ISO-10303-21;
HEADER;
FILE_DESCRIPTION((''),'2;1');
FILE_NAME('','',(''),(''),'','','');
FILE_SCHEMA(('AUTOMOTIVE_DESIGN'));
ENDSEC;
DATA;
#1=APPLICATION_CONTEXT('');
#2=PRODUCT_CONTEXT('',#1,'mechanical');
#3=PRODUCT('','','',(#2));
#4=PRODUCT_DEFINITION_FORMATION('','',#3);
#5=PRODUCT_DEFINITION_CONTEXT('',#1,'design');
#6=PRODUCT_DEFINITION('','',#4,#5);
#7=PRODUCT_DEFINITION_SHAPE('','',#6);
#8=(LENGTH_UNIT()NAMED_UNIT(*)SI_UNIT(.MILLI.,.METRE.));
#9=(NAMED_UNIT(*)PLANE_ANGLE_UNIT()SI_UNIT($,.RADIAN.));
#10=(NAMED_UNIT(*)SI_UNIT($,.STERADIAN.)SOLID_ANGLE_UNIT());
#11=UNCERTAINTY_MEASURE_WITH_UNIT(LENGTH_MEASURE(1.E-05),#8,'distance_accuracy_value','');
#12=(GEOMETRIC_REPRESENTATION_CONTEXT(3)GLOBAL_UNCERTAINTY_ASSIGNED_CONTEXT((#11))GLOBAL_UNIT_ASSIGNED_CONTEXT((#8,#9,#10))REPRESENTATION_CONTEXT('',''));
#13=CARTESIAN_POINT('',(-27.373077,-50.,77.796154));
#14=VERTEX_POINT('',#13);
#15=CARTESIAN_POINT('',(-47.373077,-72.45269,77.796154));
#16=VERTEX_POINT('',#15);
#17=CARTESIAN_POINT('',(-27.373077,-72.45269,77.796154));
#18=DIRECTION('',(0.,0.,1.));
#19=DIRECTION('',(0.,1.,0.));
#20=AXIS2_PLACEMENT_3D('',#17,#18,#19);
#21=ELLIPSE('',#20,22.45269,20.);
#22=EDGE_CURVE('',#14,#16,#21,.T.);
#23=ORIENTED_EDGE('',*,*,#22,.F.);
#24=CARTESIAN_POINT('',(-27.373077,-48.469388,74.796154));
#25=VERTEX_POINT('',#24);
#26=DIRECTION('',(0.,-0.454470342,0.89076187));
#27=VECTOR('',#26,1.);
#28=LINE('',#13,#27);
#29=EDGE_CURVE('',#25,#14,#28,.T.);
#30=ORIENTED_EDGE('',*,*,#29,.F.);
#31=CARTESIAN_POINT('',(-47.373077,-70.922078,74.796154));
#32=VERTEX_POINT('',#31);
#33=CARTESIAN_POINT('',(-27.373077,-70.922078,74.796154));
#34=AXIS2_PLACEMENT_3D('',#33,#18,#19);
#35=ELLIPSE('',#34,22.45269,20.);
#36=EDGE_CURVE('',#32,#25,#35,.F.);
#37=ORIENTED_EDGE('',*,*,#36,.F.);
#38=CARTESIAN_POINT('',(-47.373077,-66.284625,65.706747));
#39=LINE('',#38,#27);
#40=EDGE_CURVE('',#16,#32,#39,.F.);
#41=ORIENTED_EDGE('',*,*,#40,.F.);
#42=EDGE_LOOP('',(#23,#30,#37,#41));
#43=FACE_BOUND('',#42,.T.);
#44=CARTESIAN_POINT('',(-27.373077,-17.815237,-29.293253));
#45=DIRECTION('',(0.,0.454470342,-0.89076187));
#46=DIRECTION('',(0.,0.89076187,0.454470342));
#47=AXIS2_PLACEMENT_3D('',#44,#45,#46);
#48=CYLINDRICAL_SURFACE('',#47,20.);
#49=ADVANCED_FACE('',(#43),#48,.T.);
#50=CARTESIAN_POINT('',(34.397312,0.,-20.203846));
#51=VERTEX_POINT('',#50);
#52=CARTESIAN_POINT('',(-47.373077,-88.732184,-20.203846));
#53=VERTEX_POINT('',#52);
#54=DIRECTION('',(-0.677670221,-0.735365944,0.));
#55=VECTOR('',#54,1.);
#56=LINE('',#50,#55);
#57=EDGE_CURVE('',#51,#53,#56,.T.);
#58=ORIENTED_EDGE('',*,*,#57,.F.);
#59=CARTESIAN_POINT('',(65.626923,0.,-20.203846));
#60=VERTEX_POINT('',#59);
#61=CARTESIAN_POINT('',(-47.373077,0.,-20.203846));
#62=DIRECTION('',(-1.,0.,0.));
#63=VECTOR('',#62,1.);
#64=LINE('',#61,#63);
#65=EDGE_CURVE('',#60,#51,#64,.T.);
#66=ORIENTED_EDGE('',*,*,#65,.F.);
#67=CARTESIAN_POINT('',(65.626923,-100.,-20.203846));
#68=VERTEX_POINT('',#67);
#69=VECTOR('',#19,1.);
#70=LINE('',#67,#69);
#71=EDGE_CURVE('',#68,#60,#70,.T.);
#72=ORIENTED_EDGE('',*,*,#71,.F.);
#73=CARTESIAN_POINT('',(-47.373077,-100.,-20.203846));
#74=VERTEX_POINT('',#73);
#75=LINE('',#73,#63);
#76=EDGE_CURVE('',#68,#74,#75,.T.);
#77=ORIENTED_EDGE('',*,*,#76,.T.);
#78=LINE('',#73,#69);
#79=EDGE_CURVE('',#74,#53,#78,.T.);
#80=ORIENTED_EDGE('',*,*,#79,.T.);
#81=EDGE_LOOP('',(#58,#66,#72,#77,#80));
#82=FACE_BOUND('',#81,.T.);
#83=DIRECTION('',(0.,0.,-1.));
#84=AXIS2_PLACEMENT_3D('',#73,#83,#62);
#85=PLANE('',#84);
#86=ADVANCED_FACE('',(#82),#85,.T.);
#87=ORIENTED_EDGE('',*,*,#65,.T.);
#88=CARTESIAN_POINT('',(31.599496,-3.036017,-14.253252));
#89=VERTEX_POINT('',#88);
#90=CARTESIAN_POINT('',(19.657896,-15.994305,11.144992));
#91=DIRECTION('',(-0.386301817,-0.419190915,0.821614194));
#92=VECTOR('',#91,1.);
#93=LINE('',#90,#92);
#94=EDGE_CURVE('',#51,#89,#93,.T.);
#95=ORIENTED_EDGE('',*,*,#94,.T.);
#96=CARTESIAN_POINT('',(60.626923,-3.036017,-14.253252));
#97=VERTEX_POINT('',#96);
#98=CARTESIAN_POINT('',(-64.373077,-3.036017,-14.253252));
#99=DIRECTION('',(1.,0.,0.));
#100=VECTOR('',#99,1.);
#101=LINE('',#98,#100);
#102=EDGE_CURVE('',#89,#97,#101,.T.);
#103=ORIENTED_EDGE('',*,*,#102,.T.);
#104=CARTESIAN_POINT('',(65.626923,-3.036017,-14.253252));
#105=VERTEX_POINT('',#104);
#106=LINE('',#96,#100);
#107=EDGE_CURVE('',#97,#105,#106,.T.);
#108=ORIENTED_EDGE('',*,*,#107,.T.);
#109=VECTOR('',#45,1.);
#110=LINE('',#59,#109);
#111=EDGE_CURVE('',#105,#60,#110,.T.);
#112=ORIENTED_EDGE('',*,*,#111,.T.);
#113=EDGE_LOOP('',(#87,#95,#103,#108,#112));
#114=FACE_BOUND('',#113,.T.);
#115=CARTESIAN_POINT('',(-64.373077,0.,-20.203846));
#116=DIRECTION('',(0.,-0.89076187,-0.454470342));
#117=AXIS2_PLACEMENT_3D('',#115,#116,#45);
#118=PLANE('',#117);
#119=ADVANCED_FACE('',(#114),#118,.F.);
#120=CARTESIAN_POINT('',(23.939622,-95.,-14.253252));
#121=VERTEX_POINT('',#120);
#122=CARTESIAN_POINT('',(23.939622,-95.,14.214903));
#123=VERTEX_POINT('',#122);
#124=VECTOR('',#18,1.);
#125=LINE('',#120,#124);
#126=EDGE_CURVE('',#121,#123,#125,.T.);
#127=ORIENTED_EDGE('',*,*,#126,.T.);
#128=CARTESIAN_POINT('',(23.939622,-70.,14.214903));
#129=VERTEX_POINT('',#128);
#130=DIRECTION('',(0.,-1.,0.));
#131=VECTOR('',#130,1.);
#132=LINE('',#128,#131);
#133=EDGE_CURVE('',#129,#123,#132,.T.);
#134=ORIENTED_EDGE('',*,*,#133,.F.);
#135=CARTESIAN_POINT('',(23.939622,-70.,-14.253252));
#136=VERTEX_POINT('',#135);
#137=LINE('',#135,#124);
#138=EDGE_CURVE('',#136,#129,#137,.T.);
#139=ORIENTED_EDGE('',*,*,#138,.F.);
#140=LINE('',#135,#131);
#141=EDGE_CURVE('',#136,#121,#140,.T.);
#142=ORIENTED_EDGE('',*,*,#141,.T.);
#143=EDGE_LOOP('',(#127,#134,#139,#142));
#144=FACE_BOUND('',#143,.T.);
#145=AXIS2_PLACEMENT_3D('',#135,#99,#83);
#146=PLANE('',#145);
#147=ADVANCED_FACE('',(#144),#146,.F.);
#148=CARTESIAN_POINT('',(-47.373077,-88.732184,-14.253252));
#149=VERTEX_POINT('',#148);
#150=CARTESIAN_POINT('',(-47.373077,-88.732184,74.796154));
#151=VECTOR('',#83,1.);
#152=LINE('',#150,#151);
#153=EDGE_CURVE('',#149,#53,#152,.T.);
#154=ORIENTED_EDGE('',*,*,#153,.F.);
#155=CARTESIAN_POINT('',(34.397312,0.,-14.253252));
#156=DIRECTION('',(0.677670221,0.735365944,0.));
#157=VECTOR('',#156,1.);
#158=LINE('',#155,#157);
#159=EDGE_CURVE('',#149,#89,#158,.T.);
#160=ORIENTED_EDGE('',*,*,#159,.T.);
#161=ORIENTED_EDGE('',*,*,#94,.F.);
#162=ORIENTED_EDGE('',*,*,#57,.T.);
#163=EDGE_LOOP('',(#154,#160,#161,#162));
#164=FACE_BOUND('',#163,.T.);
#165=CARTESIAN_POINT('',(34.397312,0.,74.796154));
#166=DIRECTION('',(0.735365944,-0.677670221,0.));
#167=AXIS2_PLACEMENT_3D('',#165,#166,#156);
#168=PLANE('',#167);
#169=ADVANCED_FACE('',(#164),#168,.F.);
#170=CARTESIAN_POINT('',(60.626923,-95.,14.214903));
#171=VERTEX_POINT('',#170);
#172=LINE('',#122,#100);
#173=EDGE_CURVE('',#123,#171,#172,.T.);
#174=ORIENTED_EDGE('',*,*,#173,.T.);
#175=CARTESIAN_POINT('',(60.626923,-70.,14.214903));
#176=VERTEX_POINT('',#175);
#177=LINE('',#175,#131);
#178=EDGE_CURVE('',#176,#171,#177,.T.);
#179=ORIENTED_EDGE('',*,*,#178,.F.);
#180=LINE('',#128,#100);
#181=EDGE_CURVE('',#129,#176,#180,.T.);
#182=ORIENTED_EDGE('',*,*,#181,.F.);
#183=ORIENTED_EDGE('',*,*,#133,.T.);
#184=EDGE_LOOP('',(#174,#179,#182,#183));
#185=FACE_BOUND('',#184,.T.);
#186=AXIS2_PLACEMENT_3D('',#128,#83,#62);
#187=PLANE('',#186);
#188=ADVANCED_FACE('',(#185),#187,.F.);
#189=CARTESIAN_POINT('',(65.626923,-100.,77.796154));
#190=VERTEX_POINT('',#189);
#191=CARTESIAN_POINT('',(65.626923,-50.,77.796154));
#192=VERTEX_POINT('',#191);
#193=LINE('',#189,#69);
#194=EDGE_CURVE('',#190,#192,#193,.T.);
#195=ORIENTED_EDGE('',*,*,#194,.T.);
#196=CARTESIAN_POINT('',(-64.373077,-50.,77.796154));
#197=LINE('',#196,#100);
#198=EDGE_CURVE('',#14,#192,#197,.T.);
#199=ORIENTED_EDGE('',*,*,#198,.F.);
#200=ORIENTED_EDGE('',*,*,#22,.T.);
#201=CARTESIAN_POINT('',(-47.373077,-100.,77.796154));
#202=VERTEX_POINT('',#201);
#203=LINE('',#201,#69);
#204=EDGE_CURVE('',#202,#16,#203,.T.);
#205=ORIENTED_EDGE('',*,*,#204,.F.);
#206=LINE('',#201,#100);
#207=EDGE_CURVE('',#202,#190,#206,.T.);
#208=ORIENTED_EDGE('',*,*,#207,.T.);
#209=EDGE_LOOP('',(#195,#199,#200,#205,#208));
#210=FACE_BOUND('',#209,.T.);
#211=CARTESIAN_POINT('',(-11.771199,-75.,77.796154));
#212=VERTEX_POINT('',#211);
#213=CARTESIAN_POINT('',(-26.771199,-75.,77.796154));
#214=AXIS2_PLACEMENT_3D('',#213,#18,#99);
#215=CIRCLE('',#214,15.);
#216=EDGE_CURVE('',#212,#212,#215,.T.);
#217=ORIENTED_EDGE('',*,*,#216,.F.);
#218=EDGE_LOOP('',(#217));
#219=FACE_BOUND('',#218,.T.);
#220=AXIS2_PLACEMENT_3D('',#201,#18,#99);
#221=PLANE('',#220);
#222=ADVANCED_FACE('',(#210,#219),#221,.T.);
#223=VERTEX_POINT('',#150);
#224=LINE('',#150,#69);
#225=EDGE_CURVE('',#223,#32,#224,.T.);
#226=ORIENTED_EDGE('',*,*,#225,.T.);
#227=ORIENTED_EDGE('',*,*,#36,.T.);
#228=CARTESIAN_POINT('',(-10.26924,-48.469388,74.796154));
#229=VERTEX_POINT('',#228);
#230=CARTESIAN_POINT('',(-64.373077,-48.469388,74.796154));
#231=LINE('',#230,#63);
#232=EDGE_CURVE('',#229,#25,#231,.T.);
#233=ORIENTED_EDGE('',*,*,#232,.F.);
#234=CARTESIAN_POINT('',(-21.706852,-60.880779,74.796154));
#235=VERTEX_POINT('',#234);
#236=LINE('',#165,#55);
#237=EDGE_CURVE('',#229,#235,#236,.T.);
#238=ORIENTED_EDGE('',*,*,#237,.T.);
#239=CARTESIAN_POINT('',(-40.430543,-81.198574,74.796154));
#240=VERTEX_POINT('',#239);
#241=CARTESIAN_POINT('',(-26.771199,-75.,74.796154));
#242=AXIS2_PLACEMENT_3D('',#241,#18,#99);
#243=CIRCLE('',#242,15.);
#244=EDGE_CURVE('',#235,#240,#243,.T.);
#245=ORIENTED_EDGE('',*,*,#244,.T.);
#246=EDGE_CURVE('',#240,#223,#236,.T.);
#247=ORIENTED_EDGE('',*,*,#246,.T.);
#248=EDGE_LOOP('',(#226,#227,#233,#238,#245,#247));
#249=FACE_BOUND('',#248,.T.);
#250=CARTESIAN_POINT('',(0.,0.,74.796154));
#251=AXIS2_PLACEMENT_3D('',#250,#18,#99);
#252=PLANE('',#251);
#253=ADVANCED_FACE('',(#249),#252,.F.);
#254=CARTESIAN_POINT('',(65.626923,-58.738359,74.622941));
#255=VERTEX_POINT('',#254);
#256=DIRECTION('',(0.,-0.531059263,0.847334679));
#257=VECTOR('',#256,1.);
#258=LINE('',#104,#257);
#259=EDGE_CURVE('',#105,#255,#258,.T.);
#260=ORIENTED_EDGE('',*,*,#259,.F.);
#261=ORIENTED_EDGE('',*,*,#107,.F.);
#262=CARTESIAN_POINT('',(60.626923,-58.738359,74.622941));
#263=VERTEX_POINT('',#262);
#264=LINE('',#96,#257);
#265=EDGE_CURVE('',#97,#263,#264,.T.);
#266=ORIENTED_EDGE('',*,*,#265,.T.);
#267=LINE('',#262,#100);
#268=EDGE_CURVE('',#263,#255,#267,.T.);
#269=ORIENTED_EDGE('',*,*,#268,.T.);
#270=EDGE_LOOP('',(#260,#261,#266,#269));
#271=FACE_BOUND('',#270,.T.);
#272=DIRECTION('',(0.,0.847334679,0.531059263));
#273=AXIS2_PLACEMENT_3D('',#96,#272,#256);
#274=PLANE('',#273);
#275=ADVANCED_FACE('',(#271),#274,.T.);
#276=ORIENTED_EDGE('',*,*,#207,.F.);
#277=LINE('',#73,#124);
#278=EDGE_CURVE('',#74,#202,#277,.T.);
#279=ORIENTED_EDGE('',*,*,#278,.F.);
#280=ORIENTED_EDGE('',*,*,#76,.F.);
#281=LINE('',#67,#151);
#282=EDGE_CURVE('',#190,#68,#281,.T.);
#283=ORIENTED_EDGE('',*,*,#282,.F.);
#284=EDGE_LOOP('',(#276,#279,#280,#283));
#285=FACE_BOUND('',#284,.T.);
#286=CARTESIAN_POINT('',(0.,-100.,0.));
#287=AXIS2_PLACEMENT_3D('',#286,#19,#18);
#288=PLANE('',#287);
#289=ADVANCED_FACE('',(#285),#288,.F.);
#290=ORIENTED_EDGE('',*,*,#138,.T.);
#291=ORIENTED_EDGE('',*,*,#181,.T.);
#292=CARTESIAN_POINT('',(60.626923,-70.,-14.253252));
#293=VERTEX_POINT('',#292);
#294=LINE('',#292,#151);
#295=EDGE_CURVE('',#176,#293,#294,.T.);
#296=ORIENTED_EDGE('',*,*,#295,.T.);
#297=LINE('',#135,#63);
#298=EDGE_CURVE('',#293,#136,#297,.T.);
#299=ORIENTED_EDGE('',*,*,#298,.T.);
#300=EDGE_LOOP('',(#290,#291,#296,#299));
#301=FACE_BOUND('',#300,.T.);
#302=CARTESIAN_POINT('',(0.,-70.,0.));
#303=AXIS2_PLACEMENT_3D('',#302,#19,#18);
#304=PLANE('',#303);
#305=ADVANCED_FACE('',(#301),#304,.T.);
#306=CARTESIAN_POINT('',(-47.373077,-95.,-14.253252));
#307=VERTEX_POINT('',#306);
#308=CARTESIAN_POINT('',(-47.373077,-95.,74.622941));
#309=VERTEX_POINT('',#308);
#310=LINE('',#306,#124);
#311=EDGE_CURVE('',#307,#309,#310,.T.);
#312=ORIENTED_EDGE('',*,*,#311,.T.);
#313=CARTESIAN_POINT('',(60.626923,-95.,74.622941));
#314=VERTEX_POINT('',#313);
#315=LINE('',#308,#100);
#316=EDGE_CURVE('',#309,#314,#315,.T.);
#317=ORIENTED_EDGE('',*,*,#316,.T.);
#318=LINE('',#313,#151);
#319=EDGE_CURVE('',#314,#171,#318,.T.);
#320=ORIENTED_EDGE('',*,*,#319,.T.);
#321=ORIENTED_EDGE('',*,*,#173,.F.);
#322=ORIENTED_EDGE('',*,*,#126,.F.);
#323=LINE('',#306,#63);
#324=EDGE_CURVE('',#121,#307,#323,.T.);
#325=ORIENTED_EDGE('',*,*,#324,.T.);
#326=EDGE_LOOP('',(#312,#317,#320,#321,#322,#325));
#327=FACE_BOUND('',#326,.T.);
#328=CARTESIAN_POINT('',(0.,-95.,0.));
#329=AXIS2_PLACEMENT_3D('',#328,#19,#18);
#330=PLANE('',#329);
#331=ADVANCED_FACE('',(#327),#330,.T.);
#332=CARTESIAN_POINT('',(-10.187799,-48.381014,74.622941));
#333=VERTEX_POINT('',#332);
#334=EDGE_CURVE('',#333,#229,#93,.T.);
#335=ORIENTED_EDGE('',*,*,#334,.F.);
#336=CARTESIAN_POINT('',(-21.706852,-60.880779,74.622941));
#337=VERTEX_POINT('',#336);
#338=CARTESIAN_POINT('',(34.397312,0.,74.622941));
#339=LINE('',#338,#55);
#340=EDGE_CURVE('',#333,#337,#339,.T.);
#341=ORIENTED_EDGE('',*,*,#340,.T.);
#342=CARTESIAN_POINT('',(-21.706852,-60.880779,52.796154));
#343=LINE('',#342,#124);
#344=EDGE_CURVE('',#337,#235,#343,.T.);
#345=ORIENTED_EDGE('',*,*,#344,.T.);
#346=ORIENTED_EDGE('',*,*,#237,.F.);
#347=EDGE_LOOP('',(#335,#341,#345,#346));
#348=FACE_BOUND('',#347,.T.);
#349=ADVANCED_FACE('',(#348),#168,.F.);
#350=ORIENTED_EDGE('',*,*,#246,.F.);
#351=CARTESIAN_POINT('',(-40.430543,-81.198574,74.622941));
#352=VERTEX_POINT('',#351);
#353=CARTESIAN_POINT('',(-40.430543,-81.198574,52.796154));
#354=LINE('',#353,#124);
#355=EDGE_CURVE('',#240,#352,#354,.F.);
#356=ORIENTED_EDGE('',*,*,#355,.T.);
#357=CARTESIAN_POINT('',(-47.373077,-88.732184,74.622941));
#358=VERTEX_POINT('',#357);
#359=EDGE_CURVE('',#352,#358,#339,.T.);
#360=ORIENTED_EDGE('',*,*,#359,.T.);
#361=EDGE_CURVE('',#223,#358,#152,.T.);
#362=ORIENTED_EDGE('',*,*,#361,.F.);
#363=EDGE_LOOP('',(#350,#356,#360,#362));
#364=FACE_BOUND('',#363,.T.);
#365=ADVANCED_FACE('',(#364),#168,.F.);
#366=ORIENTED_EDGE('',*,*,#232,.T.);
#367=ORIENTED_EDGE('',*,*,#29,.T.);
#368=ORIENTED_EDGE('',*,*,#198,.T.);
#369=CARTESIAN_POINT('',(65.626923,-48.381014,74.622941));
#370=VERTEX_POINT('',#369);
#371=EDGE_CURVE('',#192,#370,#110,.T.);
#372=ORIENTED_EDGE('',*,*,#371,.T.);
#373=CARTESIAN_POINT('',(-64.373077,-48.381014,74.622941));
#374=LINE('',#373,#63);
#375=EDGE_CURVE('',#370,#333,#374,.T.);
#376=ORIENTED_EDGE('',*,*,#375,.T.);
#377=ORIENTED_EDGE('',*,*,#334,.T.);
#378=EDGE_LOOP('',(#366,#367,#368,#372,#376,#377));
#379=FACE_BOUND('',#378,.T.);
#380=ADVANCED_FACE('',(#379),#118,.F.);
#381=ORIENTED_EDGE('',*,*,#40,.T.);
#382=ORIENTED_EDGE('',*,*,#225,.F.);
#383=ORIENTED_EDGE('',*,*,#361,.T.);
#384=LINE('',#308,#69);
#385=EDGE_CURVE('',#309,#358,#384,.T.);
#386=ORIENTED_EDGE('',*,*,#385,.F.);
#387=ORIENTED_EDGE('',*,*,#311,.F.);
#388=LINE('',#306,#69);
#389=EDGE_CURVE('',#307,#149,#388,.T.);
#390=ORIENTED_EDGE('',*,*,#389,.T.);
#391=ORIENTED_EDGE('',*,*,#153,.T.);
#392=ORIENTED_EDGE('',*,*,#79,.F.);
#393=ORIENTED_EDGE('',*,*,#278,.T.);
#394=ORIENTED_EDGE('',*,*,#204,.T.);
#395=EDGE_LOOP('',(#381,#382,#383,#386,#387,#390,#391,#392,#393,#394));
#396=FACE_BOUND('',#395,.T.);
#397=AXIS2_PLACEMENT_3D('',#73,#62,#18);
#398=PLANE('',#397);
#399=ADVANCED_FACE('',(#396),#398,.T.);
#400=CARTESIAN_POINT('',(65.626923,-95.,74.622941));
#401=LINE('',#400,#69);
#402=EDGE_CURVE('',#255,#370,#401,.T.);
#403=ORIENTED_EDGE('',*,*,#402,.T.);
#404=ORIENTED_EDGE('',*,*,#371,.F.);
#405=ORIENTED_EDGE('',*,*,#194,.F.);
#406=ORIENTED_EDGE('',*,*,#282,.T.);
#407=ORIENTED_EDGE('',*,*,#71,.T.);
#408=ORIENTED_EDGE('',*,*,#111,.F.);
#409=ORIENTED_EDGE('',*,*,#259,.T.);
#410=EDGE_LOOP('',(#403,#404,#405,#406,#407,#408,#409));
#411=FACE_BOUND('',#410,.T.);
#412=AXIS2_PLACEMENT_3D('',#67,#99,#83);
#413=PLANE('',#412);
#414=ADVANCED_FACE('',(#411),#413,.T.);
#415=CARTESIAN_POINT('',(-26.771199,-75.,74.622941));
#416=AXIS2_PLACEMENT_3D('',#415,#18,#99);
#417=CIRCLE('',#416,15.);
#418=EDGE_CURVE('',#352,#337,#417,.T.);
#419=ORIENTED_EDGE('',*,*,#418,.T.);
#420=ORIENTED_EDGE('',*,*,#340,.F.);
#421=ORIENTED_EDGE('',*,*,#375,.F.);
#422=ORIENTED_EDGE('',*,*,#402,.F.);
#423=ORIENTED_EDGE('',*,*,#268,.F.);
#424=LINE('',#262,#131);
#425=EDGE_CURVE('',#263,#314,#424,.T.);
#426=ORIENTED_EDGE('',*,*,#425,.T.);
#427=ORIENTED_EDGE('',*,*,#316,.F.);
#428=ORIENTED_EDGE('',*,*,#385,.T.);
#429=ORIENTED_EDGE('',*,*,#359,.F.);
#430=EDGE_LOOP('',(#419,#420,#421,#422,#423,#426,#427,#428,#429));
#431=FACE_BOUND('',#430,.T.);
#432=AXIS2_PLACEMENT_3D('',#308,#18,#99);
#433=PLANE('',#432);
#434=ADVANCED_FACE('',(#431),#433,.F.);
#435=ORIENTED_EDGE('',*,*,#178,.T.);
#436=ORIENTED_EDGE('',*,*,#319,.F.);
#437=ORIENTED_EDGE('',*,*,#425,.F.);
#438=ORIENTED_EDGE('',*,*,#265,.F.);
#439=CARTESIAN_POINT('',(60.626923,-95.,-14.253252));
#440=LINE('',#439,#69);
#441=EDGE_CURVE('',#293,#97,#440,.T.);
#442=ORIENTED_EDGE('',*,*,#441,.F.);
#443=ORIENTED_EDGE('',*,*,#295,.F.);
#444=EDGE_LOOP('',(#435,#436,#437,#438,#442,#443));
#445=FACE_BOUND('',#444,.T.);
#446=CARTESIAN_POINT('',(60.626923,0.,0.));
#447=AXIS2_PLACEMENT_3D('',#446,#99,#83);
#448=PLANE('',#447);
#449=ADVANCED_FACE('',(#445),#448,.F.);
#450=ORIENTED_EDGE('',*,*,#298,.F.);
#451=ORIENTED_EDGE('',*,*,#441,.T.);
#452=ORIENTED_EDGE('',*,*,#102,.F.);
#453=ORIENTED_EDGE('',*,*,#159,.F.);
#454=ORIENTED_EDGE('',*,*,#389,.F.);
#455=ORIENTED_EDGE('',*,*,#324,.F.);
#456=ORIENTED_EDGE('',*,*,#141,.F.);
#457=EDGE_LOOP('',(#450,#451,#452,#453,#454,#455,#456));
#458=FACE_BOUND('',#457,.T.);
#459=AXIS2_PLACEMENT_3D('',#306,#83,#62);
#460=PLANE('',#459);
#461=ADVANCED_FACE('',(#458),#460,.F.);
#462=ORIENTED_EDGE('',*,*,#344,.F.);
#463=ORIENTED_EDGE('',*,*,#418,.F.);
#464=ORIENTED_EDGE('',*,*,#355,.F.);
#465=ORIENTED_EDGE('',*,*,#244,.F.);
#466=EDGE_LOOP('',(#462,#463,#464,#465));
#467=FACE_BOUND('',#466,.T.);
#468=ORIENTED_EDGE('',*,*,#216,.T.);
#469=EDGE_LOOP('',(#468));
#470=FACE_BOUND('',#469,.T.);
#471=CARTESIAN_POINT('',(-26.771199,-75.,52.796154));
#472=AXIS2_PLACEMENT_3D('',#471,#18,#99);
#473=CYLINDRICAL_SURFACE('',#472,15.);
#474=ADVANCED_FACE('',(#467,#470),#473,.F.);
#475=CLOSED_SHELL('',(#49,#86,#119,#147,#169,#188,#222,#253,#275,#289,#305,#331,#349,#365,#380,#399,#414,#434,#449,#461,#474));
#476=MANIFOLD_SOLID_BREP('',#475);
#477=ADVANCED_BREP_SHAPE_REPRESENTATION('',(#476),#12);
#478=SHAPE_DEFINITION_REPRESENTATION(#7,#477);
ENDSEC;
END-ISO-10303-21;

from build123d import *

# Parameters (mm, degrees)
SKETCH1_W           = 113
SKETCH1_H           = 98
BOSS_EXTRUDE1_DEPTH = 100
CUT_EXTRUDE1_DEPTH  = 130
CUT_EXTRUDE3_DEPTH  = 95
SKETCH4_W           = 113
SKETCH4_H           = 88.876192891
CUT_EXTRUDE4_DEPTH  = 95
BOSS_EXTRUDE4_DEPTH = 5
SKETCH7_W           = 36.687301185
SKETCH7_H           = 28.468155535
BOSS_EXTRUDE6_DEPTH = 25
SKETCH8_R           = 15
CUT_EXTRUDE5_DEPTH  = 25
FILLET1_R           = 20


with BuildPart() as part:
    # Sketch1 → Boss-Extrude1 (new body)
    with BuildSketch(Plane(origin=(0, 0, 0), x_dir=(1, 0, 0), z_dir=(0, 1, 0))):
        with Locations((9.126923077, -28.796153846)):
            Rectangle(SKETCH1_W, SKETCH1_H)
    extrude(amount=-BOSS_EXTRUDE1_DEPTH)

    # Sketch2 → Cut-Extrude1 (cut)
    with BuildSketch(Plane(origin=(65.626923077, 0, 0), x_dir=(0, 0, -1), z_dir=(1, 0, 0))):
        Polygon((20.203846154, 0), (-77.796153846, -50), (-77.796153846, 0), align=None)
    extrude(amount=-CUT_EXTRUDE1_DEPTH, mode=Mode.SUBTRACT)

    # Sketch3 → Cut-Extrude3 (cut)
    with BuildSketch(Plane(origin=(0, 0, -20.203846154), x_dir=(-1, 0, 0), z_dir=(0, 0, -1))):
        Polygon((-34.397311681, 0), (47.373076923, -88.732184402), (47.373076923, 0), align=None)
    extrude(amount=-CUT_EXTRUDE3_DEPTH, mode=Mode.SUBTRACT)

    # Sketch4 → Cut-Extrude4 (cut)
    with BuildSketch(Plane(origin=(0, 0, 0), x_dir=(1, 0, 0), z_dir=(0, 1, 0))):
        with Locations((9.126923077, -30.184844361)):
            Rectangle(SKETCH4_W, SKETCH4_H)
    extrude(amount=-CUT_EXTRUDE4_DEPTH, mode=Mode.SUBTRACT)

    # Sketch6 → Boss-Extrude4 (add)
    with BuildSketch(Plane(origin=(65.626923077, 0, 0), x_dir=(0, 0, -1), z_dir=(1, 0, 0))):
        Polygon((14.253252085, -95), (14.253252085, -3.036017382), (-74.622940806, -58.738358676), (-74.622940806, -95), align=None)
    extrude(amount=-BOSS_EXTRUDE4_DEPTH)

    # Sketch7 → Boss-Extrude6 (add)
    with BuildSketch(Plane(origin=(0, -95, 0), x_dir=(1, 0, 0), z_dir=(0, 1, 0))):
        with Locations((42.283272485, 0.019174318)):
            Rectangle(SKETCH7_W, SKETCH7_H)
    extrude(amount=BOSS_EXTRUDE6_DEPTH)

    # Sketch8 → Cut-Extrude5 (cut)
    with BuildSketch(Plane.XY.offset(77.796153846)):
        with Locations((-26.771199052, -75)):
            Circle(SKETCH8_R)
    extrude(amount=-CUT_EXTRUDE5_DEPTH, mode=Mode.SUBTRACT)

    # Fillet1
    # the kernel refuses this fillet: 20 mm, written as the material it takes off along each edge
    with BuildSketch(Plane(origin=(-47.373076923, -25.745870671, 30.258060361), x_dir=(0, -0.8907618697082329, -0.454470341687874), z_dir=(0, -0.45447034168787404, 0.890761869708233))) as fillet1_piece_1:
        with BuildLine():
            CenterArc((FILLET1_R, FILLET1_R), FILLET1_R, 180, 90)
            Line((0, FILLET1_R), (0, 0))
            Line((0, 0), (FILLET1_R, 0))
        make_face()
    extrude(amount=103.367903479, mode=Mode.SUBTRACT)


solid = part.part
